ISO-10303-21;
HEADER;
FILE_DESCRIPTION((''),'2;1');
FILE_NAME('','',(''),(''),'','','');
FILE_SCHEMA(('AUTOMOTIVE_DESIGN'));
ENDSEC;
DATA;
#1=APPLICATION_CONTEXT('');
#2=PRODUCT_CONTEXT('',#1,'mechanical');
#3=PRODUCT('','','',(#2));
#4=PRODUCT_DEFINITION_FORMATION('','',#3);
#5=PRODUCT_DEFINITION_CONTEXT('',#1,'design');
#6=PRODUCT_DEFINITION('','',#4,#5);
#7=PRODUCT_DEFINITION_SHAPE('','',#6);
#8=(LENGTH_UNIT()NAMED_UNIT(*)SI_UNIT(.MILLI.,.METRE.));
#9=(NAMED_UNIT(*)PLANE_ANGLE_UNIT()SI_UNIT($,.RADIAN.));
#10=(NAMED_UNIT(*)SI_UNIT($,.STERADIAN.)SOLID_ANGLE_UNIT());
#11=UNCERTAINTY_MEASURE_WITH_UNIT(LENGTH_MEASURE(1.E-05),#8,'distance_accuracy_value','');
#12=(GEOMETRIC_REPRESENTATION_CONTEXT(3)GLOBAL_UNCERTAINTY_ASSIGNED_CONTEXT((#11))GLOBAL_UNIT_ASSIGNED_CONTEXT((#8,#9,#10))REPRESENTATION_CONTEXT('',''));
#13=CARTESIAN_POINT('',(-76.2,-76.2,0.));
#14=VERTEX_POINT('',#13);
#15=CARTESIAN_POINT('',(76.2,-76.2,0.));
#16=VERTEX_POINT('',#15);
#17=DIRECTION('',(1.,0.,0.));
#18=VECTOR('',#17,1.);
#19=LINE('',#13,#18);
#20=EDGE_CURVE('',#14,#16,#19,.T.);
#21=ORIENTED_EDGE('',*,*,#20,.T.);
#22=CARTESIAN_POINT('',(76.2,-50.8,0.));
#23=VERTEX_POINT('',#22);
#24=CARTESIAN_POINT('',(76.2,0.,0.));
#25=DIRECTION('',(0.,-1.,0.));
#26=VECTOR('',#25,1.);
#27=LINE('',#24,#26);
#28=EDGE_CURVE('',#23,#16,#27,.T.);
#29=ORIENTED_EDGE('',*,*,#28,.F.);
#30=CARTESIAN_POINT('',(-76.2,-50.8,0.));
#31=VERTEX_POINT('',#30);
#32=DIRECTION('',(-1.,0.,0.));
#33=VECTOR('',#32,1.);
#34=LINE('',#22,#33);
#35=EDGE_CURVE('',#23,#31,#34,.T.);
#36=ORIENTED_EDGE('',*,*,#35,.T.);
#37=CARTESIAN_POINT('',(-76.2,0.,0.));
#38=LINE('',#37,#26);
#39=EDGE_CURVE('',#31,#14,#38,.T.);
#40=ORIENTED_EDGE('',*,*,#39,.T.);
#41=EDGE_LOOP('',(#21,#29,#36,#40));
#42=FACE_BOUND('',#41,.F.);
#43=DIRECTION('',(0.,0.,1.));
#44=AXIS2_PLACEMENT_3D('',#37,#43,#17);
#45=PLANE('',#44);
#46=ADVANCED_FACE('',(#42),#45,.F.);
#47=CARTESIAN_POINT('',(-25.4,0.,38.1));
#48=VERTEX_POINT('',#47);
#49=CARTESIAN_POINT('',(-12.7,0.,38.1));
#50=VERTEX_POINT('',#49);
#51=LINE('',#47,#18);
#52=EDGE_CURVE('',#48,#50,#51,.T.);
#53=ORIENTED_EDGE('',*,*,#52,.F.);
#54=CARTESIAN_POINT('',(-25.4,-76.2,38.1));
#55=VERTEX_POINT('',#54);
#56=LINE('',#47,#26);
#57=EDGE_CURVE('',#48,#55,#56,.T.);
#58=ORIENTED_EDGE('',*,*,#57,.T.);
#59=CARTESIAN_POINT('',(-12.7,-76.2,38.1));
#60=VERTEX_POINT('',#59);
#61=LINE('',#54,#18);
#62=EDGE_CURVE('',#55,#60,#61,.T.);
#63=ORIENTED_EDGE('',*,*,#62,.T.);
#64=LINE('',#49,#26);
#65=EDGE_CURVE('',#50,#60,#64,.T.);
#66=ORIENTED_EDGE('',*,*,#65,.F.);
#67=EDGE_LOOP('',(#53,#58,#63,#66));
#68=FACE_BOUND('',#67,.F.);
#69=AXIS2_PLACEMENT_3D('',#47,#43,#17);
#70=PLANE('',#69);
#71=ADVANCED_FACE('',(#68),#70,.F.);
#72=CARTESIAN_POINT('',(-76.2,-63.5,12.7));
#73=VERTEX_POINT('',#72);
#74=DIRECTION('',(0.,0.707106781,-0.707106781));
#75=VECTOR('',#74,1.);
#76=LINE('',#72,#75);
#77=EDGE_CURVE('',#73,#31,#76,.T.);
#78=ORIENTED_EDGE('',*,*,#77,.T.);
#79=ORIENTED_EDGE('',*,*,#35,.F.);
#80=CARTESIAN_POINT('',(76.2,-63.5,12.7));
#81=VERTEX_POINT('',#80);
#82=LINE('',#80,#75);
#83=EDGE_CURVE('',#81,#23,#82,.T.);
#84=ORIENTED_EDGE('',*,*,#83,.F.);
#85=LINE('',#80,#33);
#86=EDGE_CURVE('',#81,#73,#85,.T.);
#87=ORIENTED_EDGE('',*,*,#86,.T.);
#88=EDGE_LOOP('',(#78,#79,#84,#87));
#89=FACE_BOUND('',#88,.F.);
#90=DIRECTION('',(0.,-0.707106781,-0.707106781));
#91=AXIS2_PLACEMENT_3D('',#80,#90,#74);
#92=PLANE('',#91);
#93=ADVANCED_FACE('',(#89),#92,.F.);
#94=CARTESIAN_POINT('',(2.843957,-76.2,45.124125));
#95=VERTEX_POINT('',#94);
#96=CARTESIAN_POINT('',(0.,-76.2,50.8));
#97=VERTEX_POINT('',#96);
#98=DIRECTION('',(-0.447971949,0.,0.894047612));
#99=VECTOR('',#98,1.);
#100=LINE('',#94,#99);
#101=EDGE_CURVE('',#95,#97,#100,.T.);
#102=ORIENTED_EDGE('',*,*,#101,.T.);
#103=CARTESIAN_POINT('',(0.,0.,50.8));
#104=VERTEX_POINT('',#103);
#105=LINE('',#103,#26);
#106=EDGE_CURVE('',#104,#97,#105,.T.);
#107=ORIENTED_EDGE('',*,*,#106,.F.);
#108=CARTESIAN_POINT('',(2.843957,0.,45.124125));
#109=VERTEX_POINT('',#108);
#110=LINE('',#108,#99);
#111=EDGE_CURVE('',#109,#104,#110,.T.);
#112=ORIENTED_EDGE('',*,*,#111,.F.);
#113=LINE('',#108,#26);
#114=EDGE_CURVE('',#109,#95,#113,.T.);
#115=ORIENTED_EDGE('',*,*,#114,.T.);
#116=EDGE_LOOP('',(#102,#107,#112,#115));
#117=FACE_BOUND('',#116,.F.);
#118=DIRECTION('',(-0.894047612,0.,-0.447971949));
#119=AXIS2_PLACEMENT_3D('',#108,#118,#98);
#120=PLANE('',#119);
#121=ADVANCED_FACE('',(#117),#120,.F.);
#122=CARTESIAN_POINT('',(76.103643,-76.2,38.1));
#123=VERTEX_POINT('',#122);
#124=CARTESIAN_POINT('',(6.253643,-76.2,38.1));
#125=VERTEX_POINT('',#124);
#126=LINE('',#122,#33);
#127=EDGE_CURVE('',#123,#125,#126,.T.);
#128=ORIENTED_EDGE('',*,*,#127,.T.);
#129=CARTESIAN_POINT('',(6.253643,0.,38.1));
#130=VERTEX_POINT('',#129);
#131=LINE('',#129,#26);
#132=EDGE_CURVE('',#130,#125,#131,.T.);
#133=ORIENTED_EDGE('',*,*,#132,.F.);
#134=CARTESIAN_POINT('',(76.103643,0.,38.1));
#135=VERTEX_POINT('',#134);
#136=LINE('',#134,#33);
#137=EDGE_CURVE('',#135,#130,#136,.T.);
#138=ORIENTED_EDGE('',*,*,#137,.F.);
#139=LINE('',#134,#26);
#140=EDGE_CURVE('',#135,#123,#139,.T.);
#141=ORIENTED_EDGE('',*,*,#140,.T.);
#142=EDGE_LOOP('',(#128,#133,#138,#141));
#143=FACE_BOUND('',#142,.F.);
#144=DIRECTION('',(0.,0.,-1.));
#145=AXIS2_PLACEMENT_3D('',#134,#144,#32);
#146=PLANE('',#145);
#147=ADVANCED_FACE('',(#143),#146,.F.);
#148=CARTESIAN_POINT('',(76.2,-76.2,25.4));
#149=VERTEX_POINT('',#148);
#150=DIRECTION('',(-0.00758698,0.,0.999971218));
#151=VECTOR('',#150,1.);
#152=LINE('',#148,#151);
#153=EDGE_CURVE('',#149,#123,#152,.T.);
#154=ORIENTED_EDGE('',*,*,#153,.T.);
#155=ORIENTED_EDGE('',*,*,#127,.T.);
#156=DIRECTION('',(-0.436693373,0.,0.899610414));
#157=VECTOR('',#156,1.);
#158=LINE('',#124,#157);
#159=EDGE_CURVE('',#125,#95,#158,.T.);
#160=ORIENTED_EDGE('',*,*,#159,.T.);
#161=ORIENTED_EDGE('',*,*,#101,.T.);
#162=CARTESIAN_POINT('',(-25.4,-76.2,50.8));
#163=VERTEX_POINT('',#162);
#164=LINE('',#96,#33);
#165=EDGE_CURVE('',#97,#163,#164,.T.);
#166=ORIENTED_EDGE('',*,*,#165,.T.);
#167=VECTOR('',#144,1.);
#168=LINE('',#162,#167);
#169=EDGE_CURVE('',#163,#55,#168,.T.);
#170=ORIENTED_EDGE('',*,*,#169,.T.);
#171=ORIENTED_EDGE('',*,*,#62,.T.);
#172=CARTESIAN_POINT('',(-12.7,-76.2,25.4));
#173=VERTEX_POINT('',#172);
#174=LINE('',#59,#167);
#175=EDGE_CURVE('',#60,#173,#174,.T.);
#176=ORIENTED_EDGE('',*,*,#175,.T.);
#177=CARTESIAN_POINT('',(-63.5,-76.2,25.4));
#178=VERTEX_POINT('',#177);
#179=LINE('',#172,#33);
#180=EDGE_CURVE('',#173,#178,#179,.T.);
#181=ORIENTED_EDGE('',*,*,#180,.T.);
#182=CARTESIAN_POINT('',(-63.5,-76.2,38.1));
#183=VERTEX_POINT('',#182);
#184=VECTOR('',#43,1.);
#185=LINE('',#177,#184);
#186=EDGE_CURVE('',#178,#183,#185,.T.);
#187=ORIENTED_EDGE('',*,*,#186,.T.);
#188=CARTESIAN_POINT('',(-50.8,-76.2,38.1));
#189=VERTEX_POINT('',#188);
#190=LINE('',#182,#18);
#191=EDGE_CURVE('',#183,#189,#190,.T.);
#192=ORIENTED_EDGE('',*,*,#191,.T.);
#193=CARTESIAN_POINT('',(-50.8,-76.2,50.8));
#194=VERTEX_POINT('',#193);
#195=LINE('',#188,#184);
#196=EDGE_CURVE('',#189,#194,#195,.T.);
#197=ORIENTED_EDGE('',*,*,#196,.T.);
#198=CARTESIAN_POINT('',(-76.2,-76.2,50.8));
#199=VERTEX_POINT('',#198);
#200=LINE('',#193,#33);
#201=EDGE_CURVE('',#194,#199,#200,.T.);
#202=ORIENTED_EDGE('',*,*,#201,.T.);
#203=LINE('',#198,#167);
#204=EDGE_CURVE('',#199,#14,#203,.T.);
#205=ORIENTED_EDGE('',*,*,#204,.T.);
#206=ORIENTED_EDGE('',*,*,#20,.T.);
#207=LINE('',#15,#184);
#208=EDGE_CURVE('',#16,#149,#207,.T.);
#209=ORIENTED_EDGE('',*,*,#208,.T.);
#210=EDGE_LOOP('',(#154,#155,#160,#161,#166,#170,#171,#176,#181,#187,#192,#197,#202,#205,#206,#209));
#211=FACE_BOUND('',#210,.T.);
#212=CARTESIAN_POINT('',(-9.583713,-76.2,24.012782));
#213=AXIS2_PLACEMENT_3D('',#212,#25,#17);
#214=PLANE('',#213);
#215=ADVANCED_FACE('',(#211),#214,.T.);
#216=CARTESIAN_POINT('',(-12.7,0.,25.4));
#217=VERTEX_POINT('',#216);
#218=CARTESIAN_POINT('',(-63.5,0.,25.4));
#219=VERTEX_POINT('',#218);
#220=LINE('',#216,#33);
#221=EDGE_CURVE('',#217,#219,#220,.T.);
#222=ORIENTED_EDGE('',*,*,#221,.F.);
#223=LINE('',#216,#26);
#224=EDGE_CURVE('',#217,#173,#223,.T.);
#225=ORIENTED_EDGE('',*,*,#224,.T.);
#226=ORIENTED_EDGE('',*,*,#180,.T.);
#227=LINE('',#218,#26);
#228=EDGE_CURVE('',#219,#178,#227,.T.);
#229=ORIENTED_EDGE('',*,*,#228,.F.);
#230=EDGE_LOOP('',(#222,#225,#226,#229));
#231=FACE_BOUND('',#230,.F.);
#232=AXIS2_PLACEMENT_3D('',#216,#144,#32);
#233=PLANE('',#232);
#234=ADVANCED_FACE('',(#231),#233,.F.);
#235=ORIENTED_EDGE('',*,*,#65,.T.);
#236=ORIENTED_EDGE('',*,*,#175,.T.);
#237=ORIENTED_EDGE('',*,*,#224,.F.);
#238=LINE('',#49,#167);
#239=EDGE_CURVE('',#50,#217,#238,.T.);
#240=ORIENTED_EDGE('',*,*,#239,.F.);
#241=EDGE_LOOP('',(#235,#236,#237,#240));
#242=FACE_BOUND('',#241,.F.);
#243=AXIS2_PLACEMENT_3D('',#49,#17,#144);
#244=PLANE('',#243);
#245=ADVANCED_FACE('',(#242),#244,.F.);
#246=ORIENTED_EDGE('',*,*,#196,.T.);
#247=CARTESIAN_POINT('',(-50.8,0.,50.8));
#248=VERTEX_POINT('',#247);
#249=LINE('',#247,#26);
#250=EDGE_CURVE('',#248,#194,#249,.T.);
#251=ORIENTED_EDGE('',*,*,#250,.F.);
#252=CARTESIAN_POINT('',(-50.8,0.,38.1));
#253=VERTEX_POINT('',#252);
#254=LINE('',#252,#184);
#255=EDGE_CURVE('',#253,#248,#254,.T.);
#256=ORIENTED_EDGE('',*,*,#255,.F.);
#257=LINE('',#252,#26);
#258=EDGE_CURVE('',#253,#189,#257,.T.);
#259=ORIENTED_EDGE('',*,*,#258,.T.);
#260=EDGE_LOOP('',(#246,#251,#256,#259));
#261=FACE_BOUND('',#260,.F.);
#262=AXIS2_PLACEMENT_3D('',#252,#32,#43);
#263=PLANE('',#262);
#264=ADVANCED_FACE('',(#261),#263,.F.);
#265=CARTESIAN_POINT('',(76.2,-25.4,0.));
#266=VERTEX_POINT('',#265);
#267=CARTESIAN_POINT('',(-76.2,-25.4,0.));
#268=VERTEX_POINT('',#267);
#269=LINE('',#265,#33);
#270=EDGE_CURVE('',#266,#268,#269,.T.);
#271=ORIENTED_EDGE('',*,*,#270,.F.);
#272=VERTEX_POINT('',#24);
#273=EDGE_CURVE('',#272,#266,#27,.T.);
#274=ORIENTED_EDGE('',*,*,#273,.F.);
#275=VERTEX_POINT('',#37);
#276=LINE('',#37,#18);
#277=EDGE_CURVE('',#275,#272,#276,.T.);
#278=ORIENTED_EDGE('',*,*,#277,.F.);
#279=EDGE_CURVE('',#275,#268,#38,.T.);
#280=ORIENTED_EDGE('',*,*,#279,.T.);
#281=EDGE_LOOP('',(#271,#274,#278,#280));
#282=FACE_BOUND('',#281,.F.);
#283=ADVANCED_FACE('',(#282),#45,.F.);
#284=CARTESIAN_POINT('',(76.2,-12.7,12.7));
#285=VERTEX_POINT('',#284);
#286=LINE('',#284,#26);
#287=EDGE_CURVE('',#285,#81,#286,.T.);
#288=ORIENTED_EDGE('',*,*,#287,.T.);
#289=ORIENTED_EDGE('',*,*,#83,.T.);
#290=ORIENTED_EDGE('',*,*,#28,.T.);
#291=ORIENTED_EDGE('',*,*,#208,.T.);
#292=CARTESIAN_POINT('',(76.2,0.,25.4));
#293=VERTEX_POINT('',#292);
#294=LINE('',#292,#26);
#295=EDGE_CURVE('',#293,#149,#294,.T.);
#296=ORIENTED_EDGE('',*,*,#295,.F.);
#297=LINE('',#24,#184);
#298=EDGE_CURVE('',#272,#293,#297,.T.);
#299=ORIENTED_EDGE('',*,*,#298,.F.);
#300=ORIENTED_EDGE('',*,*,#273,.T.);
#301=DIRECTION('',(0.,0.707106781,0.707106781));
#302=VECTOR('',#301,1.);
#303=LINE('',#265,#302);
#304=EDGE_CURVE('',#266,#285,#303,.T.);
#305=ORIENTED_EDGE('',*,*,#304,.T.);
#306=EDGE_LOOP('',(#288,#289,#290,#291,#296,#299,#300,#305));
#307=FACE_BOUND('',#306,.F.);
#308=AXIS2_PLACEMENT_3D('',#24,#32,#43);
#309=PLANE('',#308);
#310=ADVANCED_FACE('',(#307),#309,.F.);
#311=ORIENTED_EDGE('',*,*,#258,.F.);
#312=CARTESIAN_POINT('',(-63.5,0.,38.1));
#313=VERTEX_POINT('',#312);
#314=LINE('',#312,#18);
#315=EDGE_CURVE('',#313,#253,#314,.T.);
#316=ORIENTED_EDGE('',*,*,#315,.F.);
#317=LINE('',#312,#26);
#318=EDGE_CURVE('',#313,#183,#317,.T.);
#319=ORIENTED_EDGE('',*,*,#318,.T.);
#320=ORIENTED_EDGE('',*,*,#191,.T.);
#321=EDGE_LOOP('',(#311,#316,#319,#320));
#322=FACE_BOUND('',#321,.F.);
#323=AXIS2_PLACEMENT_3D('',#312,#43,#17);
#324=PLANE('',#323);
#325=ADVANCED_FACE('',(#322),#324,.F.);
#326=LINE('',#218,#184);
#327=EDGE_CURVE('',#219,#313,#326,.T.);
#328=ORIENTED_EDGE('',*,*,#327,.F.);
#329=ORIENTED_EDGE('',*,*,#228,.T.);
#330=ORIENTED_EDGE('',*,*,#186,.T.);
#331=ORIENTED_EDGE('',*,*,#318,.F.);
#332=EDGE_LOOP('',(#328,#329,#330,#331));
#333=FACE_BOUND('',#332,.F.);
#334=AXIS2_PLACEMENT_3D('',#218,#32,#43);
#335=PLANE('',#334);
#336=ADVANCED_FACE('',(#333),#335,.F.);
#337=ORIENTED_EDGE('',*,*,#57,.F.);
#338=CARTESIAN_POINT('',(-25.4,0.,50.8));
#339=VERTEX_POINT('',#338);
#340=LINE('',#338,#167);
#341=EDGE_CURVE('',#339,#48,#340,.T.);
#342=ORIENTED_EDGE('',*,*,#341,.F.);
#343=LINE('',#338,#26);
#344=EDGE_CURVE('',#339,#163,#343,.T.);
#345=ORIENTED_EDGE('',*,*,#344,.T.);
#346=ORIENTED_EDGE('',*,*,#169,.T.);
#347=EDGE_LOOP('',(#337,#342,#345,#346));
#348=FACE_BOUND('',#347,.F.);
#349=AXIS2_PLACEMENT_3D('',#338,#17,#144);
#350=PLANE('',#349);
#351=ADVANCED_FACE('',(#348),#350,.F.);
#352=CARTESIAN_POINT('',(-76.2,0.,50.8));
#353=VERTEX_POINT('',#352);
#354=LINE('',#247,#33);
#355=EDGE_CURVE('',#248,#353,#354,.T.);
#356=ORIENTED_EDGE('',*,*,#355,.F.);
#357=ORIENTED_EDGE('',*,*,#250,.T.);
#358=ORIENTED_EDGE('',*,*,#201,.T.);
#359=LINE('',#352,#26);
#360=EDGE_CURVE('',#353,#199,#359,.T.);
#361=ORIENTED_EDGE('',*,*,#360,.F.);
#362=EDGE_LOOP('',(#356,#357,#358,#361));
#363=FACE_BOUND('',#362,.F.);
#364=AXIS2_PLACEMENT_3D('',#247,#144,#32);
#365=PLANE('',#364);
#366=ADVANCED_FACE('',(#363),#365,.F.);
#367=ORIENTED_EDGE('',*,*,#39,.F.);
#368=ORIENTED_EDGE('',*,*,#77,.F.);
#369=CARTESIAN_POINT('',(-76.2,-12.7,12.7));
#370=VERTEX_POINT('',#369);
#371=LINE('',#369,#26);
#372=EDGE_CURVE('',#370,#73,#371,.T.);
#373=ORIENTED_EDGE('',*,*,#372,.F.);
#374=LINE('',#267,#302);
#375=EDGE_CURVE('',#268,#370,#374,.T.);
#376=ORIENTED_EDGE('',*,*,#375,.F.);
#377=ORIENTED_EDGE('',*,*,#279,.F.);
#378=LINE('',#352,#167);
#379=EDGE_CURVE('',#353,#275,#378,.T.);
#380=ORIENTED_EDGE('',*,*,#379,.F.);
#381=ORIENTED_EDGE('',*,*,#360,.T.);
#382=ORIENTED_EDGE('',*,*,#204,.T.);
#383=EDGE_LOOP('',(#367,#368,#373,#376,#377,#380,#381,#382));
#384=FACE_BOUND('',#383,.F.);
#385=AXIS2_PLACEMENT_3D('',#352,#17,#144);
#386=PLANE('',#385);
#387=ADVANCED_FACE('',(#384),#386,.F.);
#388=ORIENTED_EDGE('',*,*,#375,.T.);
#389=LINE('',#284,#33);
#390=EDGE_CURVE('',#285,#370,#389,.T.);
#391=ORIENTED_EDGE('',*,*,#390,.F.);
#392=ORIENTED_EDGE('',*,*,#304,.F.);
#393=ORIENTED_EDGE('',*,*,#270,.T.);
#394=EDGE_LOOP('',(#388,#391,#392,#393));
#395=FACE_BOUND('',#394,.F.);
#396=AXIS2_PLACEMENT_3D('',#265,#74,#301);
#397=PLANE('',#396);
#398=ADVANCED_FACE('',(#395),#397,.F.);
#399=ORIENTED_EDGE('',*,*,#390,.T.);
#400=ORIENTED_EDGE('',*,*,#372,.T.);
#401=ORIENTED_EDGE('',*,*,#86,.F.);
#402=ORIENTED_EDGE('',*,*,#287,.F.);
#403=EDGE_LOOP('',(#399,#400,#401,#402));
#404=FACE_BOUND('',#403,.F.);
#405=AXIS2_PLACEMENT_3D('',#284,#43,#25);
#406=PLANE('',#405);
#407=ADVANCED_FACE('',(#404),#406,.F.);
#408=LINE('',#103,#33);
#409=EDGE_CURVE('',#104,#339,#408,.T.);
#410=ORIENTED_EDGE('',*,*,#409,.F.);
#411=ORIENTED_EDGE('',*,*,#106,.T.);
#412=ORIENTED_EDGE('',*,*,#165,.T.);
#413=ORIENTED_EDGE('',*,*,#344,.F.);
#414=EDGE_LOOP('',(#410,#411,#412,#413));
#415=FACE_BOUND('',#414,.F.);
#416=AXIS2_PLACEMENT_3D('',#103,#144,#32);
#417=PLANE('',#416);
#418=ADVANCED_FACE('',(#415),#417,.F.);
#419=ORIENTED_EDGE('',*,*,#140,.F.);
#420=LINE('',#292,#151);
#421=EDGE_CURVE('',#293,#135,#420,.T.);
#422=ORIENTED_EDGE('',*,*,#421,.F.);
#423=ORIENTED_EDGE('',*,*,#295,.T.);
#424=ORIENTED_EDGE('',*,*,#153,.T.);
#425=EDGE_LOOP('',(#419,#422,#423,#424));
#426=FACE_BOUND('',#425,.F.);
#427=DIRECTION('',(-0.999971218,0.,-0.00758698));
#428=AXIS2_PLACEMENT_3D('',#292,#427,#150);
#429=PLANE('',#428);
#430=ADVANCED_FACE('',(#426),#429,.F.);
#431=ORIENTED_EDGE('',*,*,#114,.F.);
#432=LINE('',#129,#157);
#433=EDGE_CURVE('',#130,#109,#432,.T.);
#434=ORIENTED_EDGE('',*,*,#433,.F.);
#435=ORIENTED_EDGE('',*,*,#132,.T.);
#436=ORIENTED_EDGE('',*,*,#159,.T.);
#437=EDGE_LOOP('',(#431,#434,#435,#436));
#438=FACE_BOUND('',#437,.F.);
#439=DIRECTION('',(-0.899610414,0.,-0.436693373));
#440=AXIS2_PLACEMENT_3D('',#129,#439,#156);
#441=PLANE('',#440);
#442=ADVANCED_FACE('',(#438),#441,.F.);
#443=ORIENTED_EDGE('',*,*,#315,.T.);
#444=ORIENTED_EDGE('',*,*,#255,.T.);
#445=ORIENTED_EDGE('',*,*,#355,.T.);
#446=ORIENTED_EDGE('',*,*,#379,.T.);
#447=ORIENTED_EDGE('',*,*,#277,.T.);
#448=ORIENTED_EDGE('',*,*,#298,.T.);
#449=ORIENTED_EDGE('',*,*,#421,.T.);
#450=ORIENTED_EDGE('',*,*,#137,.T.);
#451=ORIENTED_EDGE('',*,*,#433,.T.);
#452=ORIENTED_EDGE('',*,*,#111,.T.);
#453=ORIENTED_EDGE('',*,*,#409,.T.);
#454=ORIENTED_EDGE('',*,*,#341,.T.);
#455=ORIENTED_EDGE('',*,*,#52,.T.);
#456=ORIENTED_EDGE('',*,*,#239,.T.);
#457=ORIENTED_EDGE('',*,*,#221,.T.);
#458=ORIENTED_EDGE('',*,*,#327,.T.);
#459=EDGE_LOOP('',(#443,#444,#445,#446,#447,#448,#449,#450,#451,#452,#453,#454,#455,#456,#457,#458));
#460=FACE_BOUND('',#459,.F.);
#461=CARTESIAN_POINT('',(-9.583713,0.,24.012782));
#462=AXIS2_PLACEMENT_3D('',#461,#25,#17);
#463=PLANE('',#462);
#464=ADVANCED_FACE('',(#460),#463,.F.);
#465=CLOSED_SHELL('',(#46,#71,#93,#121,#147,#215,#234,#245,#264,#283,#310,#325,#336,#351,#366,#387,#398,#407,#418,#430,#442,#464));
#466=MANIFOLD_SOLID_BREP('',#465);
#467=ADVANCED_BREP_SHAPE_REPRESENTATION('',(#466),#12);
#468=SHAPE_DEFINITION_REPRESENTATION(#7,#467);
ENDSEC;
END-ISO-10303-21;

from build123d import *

# Parameters (mm, degrees)
F1_DEPTH = 76.2
F3_DEPTH = 152.4


# Not quite as in the source:
# - a feature names something its author has since deleted; it is built from what else it names


with BuildPart() as f1:
    # F0 (on Front) → F1 (new body)
    with BuildSketch(Plane.XZ):
        Polygon((-76.2, 25.4), (-76.2, 0), (76.2, 0), (76.2, 25.4), (76.1036425829, 38.1), (6.2536425829, 38.1), (2.8439569287, 45.1241247356), (0, 50.8), (-25.4, 50.8), (-25.4, 38.1), (-12.7, 38.1), (-12.7, 25.4), (-63.5, 25.4), (-63.5, 38.1), (-50.8, 38.1), (-50.8, 50.8), (-76.2, 50.8), align=None)
    extrude(amount=F1_DEPTH)

    # F2 (on face) → F3 (cut)
    with BuildSketch(Plane.YZ.offset(76.2)):
        Polygon((-63.5, 12.7), (-50.8, 0), (-38.1, 0), (-38.1, 12.7), align=None)
        Polygon((-38.1, 12.7), (-38.1, 0), (-25.4, 0), (-12.7, 12.7), align=None)
    extrude(amount=-F3_DEPTH, mode=Mode.SUBTRACT)


solid = f1.part
